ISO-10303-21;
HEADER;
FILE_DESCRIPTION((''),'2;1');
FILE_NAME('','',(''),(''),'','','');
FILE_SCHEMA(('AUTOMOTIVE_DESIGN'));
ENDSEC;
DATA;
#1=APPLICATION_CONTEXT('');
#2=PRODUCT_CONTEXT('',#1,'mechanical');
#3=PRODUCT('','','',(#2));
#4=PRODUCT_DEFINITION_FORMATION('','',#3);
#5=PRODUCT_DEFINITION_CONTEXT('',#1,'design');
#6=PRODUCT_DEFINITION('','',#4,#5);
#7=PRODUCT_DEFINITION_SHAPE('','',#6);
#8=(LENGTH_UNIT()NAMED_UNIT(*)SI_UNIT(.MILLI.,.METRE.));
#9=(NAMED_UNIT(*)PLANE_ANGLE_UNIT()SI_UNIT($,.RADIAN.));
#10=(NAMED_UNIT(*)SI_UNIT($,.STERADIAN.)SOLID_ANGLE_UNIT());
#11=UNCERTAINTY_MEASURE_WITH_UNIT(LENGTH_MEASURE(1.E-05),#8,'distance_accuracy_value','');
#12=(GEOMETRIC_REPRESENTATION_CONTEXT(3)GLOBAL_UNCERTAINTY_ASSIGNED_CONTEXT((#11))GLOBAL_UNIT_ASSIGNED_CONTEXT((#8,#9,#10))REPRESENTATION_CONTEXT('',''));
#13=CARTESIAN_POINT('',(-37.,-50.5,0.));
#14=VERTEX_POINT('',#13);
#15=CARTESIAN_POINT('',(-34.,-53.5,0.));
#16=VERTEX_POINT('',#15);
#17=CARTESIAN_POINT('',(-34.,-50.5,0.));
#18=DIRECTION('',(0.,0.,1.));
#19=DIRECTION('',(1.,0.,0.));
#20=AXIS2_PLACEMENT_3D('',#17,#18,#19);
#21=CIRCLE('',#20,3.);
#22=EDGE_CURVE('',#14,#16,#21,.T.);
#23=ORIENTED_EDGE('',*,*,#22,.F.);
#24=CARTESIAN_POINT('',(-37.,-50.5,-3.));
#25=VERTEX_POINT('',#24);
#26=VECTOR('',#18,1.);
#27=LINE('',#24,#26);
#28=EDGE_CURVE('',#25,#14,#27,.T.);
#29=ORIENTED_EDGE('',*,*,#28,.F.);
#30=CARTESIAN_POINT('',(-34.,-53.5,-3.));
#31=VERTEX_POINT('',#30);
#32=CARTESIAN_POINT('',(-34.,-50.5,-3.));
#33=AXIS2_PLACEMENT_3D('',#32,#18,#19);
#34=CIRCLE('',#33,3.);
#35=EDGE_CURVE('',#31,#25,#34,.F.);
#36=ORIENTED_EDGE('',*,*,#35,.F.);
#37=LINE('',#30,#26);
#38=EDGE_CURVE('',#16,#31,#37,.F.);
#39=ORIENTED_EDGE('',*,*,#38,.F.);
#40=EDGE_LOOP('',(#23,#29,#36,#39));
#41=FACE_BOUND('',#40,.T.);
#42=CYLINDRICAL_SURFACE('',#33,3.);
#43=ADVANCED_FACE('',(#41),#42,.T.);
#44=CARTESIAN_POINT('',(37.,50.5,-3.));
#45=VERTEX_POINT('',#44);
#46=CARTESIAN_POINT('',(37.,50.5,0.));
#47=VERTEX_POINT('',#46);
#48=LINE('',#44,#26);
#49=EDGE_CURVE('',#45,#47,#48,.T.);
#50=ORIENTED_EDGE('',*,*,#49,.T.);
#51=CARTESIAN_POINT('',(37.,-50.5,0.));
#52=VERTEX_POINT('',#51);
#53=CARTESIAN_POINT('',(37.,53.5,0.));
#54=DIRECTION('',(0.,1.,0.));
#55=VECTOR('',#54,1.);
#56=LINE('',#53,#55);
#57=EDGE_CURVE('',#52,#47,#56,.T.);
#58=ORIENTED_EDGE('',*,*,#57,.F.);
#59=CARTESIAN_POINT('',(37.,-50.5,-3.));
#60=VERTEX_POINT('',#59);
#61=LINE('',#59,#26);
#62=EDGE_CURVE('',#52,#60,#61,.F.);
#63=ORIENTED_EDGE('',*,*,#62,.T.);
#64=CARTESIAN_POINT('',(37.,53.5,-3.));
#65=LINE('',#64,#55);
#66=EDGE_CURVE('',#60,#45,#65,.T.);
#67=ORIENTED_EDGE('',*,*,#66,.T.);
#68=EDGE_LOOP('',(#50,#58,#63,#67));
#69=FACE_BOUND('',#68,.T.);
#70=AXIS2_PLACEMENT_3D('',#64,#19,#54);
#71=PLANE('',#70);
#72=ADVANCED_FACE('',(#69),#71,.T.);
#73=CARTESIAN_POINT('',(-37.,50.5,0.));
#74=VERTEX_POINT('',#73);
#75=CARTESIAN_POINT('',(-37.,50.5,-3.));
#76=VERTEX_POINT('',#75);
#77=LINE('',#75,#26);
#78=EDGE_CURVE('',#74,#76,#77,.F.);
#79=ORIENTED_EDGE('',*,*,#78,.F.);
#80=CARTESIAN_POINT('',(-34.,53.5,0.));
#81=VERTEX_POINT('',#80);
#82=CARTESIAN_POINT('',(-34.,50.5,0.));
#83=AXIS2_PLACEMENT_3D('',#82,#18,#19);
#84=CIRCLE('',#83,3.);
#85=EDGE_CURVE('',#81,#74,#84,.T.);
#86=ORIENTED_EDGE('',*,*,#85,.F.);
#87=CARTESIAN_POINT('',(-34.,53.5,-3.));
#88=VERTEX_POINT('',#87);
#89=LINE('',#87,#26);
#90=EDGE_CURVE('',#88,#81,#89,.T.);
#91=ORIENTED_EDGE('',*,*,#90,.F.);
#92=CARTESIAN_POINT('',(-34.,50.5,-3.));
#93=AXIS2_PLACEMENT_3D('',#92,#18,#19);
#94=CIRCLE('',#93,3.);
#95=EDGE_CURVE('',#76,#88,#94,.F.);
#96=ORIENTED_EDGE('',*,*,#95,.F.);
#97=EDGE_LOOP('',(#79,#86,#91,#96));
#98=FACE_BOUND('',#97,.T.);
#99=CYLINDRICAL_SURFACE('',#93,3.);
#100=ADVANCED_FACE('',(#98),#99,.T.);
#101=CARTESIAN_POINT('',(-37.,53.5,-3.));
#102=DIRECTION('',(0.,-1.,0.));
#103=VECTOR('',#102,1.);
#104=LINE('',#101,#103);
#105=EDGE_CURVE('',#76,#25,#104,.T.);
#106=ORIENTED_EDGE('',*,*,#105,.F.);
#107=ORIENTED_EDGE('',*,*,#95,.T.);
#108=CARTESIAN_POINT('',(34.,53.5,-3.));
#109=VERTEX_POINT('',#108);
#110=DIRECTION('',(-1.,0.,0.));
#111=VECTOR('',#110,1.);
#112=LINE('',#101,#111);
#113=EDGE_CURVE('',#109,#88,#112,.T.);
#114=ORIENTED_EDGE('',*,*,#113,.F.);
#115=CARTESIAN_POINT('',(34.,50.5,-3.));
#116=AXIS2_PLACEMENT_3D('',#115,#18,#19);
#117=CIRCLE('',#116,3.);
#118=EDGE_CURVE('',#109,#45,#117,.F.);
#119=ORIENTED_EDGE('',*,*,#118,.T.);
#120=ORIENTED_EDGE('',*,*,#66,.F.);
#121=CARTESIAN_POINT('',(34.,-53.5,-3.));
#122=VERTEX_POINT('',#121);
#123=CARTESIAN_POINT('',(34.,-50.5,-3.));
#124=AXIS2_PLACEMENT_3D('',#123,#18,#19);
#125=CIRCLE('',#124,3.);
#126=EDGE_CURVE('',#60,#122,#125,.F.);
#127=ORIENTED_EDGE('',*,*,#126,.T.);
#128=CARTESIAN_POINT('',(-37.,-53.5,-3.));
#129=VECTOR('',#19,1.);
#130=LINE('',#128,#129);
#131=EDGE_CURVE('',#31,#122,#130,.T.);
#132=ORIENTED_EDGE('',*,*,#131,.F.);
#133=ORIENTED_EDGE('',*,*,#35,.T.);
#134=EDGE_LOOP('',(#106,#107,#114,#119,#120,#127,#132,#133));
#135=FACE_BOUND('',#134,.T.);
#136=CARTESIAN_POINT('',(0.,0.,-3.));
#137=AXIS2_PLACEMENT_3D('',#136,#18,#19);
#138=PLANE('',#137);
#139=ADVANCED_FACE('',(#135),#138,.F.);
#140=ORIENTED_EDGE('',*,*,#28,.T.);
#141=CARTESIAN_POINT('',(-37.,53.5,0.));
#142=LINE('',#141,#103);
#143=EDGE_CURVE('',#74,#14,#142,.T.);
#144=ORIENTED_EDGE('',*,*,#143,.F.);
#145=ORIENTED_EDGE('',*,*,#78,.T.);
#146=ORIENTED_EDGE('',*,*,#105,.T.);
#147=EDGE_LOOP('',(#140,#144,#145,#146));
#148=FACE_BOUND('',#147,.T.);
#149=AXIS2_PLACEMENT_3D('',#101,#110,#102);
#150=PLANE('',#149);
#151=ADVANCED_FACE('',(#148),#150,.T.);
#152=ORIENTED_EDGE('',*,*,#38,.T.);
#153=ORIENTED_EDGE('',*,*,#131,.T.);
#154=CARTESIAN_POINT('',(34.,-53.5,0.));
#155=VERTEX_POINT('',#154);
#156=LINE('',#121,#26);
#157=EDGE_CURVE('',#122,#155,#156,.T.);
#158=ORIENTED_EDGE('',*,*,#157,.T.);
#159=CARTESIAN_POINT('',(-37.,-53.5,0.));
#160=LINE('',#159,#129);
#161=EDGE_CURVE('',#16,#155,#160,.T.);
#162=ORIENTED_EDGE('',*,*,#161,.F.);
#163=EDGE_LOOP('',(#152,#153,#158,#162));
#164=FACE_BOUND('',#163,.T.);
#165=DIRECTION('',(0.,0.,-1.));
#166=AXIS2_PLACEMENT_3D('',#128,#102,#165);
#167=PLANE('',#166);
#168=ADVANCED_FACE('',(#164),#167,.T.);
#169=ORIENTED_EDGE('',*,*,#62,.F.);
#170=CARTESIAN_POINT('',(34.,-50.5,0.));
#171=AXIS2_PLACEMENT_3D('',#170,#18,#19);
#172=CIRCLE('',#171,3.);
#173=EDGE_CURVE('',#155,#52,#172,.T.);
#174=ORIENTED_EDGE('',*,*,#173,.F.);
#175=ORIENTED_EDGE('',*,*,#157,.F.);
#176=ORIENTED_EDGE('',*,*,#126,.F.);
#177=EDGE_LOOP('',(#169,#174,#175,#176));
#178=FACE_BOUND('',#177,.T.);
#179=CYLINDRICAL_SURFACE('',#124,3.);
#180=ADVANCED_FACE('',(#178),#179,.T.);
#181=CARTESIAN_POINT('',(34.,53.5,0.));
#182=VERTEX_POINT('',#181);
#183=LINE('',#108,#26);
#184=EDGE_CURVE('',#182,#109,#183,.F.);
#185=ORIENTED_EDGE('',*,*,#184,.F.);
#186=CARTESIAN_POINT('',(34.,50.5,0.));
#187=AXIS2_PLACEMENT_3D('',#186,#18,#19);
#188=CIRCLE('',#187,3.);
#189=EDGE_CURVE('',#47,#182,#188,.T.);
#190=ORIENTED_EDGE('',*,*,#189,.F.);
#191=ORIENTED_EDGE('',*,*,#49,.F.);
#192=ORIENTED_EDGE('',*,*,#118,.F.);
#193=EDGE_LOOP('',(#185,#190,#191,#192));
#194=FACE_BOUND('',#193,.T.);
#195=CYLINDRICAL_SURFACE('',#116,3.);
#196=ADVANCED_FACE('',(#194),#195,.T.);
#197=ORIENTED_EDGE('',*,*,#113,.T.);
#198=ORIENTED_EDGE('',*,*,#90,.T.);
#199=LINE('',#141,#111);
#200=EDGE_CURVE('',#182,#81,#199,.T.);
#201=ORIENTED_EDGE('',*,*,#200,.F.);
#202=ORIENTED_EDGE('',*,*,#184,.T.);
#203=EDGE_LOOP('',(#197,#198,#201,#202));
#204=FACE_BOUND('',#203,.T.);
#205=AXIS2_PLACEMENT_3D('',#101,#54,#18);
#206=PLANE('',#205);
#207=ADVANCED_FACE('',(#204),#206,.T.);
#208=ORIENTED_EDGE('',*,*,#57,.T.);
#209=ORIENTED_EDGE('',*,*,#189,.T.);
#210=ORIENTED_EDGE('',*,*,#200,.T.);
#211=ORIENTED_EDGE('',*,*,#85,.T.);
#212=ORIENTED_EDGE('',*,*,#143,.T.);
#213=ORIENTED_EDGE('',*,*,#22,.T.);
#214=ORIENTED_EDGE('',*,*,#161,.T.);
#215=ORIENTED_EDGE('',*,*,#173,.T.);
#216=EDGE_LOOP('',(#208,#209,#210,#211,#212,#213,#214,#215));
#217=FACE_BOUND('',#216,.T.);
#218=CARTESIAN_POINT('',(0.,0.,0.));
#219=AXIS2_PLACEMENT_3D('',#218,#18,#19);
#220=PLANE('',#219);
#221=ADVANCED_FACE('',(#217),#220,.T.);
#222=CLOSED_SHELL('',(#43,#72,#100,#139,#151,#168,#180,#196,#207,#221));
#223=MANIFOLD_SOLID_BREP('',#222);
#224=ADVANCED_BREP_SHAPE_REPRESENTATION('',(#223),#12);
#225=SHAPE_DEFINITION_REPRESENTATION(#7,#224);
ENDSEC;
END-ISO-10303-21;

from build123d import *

# Parameters (mm, degrees)
IZIM1_W            = 74
IZIM1_H            = 107
TABAN_FLAN_1_DEPTH = 3
RADYUS1_R          = 3


# Sheet-metal steps are written as plain solids
with BuildPart() as part:
    # Çizim1 → Taban-Flanş1 (new body)
    with BuildSketch(Plane.XY):
        Rectangle(IZIM1_W, IZIM1_H)
    extrude(amount=-TABAN_FLAN_1_DEPTH)

    # Radyus1
    radyus1_edges = [part.edges().sort_by_distance(p)[0] for p in [
        (37, -53.5, -1.5),
        (-37, -53.5, -1.5),
        (-37, 53.5, -1.5),
        (37, 53.5, -1.5),
    ]]
    fillet(radyus1_edges, radius=RADYUS1_R)


solid = part.part
